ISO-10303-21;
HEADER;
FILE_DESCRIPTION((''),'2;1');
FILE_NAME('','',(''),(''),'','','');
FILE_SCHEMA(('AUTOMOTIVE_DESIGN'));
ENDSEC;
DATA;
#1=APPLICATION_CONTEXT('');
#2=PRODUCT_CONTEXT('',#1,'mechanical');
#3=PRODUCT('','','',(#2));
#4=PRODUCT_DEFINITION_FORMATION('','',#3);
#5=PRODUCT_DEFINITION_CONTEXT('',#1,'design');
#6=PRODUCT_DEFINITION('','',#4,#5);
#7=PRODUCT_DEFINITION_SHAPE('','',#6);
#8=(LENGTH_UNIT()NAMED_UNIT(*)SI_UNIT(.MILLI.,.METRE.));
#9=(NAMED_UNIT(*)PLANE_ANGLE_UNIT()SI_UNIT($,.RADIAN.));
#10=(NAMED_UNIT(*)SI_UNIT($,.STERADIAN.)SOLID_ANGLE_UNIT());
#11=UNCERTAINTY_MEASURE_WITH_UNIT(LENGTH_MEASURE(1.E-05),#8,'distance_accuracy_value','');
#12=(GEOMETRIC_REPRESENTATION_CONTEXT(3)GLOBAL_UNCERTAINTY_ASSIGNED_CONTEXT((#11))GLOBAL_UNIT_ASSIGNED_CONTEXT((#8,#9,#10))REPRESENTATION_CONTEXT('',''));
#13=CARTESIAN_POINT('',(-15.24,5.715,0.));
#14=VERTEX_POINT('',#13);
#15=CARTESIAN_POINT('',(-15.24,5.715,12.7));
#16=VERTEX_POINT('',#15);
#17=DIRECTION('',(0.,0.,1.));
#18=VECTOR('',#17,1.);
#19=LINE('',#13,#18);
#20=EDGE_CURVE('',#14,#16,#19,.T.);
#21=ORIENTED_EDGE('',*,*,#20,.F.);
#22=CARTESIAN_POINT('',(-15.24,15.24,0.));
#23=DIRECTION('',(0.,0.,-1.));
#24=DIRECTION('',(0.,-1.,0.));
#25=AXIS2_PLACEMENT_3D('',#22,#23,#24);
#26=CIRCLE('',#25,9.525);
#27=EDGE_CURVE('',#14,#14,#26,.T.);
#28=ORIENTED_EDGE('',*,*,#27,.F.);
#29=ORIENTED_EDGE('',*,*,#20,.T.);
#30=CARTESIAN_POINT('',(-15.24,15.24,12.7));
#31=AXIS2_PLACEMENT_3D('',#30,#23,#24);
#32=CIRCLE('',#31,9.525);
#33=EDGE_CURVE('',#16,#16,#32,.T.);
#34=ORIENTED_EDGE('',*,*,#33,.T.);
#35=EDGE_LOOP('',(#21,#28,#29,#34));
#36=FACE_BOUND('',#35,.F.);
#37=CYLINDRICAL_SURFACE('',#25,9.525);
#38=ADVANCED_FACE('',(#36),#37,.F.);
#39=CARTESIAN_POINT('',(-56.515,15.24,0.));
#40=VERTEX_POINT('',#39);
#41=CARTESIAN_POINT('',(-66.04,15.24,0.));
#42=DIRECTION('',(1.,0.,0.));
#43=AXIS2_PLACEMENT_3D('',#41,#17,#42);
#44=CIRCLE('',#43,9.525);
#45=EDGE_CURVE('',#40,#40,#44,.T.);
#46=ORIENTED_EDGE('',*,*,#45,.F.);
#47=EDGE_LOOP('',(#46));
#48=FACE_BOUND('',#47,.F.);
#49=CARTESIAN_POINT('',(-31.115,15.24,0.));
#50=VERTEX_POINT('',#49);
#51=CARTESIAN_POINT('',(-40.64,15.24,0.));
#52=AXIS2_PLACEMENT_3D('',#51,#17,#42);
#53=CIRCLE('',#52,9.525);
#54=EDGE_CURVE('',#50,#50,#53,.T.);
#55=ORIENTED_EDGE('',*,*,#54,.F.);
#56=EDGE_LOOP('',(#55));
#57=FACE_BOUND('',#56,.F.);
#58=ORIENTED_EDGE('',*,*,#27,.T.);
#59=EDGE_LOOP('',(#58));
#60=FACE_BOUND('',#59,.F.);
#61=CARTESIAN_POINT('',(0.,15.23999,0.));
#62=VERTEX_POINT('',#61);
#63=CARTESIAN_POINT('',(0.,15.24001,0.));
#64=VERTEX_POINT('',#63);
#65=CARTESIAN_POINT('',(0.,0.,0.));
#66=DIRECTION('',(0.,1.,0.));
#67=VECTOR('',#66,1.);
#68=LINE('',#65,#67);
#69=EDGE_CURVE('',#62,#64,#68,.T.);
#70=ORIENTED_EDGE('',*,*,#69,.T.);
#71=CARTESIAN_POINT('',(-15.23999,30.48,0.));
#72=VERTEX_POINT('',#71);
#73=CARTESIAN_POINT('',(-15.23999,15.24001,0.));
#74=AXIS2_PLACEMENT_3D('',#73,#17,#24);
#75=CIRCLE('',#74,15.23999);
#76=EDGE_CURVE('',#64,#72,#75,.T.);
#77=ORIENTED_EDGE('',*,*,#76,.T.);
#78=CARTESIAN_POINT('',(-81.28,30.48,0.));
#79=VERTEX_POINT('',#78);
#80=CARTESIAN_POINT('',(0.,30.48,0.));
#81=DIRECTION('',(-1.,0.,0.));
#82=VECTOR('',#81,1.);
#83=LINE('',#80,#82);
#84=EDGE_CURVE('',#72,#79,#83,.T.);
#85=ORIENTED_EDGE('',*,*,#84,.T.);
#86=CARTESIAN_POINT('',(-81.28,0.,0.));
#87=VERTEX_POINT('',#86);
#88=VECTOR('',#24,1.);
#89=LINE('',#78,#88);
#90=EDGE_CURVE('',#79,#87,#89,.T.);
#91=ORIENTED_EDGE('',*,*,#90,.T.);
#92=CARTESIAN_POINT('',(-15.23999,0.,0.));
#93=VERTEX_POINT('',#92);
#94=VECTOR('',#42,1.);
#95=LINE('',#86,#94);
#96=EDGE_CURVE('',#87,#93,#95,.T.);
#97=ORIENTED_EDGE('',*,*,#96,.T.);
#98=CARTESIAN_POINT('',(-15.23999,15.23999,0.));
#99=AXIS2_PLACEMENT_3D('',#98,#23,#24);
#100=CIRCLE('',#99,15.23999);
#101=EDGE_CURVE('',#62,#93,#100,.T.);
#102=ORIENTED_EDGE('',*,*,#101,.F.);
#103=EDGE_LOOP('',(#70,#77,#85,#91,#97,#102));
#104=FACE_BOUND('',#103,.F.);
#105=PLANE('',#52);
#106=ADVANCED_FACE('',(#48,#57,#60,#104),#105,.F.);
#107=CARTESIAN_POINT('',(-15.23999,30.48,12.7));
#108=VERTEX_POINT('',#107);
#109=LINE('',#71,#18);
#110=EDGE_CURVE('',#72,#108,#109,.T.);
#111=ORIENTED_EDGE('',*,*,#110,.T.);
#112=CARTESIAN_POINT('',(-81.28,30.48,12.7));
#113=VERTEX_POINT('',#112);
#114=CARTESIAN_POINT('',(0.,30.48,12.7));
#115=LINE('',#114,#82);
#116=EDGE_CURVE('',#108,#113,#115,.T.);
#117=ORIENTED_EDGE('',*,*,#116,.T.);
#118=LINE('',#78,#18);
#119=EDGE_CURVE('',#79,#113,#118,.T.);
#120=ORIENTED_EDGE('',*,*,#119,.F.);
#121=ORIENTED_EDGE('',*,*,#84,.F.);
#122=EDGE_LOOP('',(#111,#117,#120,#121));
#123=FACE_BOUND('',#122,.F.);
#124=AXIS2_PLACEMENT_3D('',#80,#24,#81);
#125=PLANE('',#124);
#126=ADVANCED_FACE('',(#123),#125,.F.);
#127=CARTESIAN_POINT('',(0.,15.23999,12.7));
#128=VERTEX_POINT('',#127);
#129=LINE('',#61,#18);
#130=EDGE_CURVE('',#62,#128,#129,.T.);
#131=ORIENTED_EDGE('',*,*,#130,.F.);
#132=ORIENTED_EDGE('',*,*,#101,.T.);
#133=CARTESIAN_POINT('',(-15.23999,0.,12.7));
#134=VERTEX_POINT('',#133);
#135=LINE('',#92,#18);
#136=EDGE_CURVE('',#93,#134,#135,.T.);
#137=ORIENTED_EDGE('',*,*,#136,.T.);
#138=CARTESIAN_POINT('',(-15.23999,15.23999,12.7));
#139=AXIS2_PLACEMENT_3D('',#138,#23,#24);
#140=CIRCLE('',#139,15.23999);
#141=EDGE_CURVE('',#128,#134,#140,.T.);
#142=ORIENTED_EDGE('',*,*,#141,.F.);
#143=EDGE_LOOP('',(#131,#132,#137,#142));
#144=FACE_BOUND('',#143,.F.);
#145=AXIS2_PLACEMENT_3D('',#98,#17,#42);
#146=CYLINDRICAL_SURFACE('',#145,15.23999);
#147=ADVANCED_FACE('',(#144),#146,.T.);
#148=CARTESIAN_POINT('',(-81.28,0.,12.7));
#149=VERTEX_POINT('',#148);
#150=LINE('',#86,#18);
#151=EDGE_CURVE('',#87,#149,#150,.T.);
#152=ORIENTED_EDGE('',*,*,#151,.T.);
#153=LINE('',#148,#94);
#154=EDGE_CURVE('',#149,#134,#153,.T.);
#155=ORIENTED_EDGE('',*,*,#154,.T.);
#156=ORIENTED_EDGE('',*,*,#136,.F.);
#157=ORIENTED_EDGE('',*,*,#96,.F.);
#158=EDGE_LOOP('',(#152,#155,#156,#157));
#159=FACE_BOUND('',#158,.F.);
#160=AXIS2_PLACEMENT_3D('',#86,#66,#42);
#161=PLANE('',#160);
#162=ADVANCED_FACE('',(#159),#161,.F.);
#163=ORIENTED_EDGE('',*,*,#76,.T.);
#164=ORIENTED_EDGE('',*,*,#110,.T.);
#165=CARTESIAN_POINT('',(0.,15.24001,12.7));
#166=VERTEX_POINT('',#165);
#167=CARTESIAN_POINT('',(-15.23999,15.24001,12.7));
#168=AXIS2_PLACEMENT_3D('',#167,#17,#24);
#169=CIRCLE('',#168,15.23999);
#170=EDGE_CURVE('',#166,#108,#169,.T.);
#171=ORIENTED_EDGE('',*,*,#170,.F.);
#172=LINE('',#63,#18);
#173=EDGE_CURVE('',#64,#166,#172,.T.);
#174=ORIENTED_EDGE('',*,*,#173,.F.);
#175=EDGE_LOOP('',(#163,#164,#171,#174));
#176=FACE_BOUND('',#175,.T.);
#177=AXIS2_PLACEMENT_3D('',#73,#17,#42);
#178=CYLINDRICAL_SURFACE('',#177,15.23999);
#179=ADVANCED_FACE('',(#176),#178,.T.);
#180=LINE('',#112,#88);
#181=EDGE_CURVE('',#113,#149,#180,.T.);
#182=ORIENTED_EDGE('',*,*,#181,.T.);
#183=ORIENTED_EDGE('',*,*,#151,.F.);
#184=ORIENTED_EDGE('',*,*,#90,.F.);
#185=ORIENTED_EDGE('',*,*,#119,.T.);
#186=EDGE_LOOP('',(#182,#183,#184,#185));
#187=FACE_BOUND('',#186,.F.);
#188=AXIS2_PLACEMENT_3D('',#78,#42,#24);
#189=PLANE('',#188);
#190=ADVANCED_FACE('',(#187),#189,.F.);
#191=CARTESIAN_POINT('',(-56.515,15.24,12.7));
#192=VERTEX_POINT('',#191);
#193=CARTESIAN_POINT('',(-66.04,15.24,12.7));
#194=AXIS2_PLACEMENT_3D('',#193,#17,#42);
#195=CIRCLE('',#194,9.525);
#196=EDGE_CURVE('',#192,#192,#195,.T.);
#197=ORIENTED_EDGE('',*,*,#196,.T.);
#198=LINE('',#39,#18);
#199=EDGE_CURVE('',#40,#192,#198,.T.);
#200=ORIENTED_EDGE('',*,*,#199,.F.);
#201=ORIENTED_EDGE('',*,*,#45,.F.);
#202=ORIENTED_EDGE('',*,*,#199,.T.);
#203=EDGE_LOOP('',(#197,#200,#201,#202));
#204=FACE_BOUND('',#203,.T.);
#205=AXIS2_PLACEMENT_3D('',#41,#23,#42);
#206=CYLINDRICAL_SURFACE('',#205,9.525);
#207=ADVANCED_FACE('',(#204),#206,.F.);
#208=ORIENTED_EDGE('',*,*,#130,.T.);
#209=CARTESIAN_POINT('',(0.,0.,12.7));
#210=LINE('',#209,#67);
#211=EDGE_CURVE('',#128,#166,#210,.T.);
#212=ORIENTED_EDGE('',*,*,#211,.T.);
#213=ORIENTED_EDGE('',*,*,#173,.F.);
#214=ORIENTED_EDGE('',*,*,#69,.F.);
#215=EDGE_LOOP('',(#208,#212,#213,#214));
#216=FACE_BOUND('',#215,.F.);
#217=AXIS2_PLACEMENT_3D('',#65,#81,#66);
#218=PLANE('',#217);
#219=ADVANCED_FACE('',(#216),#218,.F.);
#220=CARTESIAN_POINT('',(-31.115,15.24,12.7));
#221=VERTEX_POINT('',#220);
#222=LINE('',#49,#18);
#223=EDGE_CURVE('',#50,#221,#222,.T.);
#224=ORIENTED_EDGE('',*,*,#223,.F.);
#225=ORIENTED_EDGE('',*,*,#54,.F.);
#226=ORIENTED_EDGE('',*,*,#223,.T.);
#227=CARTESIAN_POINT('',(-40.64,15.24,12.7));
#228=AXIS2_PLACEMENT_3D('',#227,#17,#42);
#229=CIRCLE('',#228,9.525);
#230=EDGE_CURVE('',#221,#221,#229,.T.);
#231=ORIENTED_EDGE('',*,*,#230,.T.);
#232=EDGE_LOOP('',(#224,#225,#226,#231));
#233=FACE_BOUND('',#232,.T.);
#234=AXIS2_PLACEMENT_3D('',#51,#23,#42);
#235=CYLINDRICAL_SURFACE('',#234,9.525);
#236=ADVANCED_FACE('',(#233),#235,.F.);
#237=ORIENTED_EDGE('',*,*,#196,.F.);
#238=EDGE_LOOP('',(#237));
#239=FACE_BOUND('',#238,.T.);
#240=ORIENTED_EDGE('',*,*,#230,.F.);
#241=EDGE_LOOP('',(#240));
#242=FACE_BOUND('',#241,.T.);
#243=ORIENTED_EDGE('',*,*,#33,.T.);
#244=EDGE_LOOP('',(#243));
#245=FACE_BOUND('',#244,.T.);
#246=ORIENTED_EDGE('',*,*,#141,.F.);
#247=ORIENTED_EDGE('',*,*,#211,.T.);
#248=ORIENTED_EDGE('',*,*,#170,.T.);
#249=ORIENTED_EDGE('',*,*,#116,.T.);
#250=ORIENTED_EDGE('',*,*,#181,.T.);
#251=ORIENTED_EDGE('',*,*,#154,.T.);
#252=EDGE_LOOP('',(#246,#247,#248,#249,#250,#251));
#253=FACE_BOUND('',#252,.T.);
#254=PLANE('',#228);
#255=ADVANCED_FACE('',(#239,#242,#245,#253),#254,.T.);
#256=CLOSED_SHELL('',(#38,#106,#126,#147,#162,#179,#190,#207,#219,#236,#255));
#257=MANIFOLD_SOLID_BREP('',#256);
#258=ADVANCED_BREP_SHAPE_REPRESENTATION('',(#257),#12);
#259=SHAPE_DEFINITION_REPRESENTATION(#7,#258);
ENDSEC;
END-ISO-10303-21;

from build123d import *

# Parameters (mm, degrees)
F0_R     = 9.525
F1_DEPTH = 12.7
F2_R     = 15.23999


# Not quite as in the source:
# - a fillet or chamfer is up to 0.001 mm smaller than in the source, because OpenCascade refuses the exact size


with BuildPart() as f1:
    # F0 (on Top) → F1 (new body)
    with BuildSketch(Plane.XY):
        Polygon((-15.24, 0), (0, 0), (0, 30.48), (-81.28, 30.48), (-81.28, 0), align=None)
        with Locations((-66.04, 15.24)):
            Circle(F0_R, mode=Mode.SUBTRACT)
        with Locations((-40.64, 15.24)):
            Circle(F0_R, mode=Mode.SUBTRACT)
        with BuildLine():
            ThreePointArc((-5.715, 15.24), (-8.5048079092, 8.5048079092), (-15.24, 5.715))
            ThreePointArc((-15.24, 5.715), (-21.9751920908, 21.9751920908), (-5.715, 15.24))
        make_face(mode=Mode.SUBTRACT)
    extrude(amount=F1_DEPTH)

    # F2 (radius 15.24 in the source; OpenCascade refuses exactly that, so slightly less here)
    f2_edges = [f1.edges().sort_by_distance(p)[0] for p in [
        (0, 0, 6.35),
        (0, 30.48, 6.35),
    ]]
    fillet(f2_edges, radius=F2_R)


solid = f1.part
